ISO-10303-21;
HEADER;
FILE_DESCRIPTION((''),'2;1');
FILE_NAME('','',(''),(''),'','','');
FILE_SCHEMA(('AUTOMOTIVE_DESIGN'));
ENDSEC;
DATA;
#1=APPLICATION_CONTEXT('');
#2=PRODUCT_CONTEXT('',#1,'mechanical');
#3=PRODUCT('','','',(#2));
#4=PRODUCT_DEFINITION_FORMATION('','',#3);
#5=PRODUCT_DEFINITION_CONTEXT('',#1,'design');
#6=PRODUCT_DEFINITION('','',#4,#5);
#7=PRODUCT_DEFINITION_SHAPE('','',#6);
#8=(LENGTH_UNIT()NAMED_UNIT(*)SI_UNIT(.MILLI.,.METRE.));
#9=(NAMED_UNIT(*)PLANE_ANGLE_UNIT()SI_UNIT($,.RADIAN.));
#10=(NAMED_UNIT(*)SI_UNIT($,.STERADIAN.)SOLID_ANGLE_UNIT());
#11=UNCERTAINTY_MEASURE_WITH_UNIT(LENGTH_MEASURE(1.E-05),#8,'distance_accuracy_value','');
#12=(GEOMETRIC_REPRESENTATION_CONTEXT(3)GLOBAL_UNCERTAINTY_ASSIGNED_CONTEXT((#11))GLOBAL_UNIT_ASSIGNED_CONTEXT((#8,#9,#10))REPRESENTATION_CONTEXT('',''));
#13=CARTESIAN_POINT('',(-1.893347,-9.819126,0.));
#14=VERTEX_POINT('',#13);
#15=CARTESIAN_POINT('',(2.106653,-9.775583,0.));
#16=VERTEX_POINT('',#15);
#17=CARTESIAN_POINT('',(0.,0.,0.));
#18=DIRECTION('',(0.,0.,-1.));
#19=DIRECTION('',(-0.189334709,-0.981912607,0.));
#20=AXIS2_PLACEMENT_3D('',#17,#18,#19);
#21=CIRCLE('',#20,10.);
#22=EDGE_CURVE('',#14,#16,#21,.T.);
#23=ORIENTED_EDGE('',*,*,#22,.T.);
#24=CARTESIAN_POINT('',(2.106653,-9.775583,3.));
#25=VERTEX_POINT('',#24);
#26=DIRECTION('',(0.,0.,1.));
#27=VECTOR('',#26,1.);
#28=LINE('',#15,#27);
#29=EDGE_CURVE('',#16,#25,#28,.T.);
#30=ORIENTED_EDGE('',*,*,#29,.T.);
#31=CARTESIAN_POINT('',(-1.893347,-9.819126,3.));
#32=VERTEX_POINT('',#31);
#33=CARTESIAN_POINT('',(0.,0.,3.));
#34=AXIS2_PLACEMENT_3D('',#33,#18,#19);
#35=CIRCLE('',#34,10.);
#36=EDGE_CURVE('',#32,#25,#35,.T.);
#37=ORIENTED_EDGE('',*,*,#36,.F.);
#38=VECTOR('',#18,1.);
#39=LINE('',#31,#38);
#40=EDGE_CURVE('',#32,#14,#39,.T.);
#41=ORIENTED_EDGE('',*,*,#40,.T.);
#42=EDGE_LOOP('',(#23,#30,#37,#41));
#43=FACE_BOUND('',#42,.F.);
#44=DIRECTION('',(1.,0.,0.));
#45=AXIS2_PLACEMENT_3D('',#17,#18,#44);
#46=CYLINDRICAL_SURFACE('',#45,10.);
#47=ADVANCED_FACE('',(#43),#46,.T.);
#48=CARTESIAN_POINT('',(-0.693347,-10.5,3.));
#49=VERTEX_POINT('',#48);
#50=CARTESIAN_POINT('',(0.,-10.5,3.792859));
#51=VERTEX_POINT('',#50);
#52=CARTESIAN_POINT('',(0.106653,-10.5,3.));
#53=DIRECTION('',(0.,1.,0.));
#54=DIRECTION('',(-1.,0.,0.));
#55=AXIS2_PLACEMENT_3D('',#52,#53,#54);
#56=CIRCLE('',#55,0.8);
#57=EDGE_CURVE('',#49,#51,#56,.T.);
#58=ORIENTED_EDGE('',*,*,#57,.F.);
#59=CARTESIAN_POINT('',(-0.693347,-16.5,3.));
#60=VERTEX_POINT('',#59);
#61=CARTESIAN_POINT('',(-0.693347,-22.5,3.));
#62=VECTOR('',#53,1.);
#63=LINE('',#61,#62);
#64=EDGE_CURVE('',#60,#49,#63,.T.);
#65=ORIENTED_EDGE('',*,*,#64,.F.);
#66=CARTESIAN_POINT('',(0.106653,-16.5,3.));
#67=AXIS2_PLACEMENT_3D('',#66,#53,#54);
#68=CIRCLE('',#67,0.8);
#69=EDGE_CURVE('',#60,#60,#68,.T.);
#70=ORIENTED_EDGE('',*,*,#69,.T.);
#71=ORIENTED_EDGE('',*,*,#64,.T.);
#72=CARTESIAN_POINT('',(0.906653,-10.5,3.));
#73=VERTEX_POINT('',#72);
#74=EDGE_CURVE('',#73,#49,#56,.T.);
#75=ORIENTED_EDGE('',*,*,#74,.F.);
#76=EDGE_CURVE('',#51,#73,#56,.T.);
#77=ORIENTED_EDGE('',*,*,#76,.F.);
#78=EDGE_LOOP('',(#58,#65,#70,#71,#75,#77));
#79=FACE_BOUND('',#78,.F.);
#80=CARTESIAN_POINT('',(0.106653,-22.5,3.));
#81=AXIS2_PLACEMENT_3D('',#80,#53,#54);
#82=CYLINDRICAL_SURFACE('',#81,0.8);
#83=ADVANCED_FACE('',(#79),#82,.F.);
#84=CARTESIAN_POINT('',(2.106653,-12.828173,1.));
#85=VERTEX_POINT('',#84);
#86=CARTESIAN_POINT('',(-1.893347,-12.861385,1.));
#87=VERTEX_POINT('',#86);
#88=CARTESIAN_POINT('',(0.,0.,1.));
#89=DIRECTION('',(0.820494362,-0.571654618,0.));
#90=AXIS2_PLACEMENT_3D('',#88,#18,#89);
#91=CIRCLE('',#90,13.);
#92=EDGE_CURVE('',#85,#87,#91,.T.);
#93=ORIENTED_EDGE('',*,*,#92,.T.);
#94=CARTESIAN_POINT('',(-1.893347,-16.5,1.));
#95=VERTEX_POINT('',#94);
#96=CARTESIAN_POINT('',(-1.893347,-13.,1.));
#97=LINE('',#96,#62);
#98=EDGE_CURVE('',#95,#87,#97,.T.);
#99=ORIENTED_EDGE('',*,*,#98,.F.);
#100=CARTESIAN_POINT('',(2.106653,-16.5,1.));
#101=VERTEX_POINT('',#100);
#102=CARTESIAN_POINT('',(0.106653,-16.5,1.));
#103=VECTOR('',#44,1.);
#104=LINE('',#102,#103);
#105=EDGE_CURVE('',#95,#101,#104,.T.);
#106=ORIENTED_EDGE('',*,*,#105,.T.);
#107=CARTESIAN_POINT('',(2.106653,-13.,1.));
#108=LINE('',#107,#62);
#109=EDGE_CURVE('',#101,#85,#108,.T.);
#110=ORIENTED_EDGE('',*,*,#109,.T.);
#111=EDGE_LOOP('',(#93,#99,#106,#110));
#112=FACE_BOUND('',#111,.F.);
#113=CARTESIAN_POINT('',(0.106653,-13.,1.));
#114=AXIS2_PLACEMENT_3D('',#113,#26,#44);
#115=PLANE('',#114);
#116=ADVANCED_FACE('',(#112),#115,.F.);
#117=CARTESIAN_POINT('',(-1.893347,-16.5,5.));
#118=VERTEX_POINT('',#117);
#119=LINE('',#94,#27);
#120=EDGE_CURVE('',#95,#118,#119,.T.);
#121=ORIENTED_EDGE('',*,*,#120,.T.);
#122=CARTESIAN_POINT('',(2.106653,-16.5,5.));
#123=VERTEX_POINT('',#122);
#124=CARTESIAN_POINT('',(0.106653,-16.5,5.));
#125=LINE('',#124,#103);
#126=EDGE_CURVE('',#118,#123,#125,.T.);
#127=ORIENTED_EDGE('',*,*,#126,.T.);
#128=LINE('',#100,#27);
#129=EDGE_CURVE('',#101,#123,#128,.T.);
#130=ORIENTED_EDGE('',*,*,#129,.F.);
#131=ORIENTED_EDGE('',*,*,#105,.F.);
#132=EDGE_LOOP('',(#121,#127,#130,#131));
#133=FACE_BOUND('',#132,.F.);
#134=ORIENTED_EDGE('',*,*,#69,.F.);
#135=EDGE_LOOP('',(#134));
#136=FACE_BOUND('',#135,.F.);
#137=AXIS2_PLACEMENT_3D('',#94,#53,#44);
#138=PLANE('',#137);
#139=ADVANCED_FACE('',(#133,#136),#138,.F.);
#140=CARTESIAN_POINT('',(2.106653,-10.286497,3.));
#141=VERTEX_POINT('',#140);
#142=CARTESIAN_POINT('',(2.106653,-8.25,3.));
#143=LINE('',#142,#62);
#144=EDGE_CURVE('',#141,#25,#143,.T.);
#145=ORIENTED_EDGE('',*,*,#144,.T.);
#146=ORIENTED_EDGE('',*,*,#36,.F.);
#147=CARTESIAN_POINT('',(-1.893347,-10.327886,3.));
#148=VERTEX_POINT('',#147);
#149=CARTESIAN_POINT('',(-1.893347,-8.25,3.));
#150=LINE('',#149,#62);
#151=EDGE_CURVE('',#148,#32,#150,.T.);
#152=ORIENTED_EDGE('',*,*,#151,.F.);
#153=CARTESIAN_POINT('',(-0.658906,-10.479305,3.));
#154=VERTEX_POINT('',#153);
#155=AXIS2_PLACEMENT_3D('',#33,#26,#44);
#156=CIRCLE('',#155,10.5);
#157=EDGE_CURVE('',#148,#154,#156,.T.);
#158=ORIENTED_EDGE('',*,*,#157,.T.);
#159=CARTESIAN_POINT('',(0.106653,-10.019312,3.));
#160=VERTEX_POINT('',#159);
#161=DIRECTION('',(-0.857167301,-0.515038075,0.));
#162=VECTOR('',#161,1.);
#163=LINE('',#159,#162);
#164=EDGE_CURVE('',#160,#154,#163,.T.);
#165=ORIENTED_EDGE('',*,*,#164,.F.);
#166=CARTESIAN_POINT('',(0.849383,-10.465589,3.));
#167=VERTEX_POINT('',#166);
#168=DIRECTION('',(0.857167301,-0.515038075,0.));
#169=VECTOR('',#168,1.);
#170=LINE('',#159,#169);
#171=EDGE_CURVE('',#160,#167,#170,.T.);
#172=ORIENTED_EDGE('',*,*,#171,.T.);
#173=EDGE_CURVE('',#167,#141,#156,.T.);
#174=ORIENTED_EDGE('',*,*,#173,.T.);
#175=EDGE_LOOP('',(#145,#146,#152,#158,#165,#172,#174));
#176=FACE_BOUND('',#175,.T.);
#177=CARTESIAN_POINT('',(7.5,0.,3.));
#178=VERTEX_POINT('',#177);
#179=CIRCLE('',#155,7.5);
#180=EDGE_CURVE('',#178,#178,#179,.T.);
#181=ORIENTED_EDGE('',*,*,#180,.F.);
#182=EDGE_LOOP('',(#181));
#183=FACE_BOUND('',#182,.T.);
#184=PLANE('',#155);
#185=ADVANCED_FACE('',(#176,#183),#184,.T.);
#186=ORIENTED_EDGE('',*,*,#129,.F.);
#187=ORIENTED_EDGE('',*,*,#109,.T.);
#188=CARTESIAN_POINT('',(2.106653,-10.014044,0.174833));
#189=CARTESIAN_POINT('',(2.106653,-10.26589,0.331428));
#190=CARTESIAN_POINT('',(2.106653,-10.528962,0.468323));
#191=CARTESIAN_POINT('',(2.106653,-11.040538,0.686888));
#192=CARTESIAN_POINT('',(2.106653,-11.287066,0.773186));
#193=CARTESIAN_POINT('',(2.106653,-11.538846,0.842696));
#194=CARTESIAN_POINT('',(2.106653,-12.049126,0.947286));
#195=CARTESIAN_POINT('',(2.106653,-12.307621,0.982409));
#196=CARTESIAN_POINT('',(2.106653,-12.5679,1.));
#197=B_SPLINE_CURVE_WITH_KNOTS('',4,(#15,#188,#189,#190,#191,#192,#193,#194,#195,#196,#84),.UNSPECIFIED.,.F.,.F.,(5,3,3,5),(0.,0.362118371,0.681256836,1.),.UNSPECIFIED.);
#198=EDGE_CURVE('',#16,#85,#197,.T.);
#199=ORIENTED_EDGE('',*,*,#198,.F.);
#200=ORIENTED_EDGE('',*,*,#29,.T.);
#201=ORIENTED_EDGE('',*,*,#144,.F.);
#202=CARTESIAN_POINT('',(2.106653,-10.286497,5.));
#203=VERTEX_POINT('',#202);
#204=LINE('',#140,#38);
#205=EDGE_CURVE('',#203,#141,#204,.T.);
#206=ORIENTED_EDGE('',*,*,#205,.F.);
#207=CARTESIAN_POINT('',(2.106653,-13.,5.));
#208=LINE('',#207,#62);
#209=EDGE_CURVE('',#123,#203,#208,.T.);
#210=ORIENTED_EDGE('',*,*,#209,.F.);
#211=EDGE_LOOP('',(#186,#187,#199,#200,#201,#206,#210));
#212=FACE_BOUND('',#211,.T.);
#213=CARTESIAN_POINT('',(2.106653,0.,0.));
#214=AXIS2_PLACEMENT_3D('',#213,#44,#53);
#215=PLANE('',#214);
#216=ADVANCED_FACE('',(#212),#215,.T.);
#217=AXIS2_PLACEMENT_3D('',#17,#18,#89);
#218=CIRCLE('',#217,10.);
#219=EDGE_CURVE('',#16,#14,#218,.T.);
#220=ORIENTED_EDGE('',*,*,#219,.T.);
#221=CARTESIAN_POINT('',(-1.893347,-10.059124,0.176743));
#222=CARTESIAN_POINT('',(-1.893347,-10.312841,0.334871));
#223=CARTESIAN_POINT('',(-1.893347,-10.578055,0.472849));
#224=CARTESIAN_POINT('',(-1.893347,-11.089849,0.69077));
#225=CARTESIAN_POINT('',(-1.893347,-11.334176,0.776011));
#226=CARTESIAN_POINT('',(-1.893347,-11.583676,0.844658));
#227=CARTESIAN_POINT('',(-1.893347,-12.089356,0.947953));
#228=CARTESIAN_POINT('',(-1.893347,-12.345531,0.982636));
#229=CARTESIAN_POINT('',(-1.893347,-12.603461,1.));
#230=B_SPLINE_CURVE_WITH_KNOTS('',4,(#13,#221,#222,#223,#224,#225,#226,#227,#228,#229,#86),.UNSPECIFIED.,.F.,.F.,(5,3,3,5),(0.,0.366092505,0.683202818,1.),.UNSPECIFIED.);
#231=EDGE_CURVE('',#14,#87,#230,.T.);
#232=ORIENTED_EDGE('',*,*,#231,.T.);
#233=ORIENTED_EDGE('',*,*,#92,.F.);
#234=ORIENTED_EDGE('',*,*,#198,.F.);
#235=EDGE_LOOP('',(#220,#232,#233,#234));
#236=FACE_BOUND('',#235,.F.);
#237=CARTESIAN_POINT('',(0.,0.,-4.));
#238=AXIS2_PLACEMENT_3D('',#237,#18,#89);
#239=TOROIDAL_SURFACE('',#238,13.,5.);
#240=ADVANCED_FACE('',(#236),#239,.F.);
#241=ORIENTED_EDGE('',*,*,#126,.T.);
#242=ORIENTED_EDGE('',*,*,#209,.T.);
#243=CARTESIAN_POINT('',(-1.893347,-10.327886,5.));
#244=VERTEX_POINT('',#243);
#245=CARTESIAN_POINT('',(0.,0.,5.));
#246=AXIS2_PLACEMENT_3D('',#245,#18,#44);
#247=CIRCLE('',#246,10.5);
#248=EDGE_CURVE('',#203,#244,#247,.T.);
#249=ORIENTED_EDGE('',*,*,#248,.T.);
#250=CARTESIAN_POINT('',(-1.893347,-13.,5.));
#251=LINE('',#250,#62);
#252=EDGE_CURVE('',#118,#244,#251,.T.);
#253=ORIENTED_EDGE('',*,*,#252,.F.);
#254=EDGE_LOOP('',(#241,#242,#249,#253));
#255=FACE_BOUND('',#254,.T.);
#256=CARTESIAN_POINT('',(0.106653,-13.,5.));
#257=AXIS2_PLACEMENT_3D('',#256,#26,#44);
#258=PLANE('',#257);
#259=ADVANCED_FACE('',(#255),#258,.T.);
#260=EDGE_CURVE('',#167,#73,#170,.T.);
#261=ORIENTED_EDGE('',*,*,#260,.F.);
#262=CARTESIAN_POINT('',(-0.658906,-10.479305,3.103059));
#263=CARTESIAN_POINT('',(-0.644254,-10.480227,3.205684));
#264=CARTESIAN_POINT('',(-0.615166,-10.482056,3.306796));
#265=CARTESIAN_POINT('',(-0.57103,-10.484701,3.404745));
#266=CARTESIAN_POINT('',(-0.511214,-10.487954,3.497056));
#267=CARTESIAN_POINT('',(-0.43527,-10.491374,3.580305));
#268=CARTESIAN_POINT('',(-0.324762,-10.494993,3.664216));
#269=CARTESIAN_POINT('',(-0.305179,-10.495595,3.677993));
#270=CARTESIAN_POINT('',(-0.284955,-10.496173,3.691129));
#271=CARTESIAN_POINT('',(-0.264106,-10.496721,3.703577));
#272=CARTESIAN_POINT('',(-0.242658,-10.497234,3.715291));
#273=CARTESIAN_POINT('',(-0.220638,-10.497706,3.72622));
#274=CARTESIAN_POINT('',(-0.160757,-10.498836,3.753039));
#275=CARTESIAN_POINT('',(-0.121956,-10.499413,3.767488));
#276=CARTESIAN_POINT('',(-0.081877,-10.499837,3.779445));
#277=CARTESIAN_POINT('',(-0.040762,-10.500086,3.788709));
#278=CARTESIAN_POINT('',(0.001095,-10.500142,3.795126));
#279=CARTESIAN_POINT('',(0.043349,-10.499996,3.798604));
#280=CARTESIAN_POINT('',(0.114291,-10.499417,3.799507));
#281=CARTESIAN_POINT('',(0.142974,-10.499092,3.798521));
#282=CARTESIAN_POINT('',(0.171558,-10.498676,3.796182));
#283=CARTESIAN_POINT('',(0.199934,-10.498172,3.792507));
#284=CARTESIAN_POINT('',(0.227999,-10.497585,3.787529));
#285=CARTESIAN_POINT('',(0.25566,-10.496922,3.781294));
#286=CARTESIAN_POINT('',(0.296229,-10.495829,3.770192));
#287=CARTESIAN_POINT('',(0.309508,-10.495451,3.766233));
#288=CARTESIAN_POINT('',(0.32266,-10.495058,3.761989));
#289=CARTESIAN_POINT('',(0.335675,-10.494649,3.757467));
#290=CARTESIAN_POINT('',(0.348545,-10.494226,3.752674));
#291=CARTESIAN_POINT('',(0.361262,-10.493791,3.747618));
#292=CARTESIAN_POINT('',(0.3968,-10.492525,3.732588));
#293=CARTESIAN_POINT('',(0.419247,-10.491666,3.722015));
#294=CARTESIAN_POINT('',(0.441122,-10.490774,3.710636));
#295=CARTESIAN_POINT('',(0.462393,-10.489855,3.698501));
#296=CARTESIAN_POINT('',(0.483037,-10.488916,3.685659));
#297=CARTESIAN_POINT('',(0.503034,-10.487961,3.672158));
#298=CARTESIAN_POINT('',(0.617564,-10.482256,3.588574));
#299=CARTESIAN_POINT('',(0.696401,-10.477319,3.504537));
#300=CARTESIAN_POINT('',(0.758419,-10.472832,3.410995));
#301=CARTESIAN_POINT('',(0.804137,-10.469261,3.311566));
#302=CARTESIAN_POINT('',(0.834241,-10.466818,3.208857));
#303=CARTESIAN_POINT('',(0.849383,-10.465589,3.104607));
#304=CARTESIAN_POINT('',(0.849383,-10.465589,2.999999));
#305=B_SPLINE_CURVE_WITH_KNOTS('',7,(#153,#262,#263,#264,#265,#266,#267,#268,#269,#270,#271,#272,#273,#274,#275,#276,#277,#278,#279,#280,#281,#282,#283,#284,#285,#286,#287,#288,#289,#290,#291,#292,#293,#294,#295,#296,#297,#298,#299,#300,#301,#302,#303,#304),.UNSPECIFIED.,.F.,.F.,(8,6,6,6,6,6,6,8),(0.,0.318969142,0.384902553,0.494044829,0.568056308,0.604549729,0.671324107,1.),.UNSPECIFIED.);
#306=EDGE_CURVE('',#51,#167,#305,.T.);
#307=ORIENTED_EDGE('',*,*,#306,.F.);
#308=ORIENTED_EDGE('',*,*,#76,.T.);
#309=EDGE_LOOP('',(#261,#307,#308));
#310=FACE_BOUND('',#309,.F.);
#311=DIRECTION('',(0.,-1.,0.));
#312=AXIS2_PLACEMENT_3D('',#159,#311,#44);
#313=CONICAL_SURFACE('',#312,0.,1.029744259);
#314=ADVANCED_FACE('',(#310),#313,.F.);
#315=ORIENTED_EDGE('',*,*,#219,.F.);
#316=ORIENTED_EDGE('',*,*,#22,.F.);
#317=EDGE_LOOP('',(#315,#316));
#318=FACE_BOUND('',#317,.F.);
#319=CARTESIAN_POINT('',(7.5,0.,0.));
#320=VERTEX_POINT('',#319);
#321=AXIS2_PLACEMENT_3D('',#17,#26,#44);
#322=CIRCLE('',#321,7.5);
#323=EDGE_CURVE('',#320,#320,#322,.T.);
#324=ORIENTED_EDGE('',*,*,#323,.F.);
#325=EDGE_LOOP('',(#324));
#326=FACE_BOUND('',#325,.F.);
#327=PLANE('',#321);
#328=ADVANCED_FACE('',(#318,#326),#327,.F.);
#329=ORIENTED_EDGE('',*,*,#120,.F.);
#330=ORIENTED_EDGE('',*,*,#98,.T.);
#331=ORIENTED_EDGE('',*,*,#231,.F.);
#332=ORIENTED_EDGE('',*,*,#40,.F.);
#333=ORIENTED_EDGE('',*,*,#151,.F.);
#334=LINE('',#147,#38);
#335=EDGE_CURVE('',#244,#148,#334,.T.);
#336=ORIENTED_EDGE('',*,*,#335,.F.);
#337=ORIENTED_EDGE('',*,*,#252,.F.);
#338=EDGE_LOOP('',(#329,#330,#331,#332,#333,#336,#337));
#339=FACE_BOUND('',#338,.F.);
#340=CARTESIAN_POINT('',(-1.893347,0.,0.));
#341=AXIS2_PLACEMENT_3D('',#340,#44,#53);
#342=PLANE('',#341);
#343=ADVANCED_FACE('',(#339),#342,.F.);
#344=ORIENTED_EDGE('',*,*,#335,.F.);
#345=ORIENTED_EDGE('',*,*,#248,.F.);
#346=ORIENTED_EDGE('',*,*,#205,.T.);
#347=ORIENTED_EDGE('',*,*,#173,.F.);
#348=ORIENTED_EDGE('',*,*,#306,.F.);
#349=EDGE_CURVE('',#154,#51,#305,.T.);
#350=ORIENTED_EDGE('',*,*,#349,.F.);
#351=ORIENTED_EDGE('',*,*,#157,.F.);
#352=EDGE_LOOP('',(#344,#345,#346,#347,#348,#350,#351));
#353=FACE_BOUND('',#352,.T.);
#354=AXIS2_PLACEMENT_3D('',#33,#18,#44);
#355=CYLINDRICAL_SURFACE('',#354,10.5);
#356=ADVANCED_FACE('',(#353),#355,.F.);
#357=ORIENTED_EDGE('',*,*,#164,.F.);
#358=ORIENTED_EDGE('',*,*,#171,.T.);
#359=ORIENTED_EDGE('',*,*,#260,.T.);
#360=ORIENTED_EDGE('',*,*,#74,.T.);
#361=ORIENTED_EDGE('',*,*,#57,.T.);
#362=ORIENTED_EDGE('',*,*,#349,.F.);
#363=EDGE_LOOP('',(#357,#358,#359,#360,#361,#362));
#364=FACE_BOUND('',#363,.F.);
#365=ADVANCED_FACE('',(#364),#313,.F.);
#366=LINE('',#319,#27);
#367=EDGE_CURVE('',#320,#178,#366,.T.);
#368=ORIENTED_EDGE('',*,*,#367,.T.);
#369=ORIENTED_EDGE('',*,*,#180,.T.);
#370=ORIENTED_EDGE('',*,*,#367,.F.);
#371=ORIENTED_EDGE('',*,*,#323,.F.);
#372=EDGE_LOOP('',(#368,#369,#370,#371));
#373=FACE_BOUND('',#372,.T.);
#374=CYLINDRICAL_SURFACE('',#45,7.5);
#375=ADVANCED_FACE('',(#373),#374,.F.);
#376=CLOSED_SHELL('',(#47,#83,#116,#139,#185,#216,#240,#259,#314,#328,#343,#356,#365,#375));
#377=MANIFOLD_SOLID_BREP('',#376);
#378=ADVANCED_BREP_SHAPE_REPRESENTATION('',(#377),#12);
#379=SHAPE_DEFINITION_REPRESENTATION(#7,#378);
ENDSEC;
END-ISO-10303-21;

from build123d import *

# Parameters (mm, degrees)
F0_R        = 10
F0_R_2      = 7.5
F1_DEPTH    = 3
F3_W        = 4
F3_H        = 7
F4_DEPTH    = 4
F5_R        = 10.5
F6_DEPTH    = 25
F7_T4_ANGLE = 109.021242163
F9_D        = 1.6
F9_DEPTH    = 6
F9_TIP      = 0.4806884952


# Not quite as in the source:
# - a fillet or chamfer that OpenCascade refuses, or shapes differently, is made with other operations: its cross-section is extruded or revolved along the edge and cut away or added


with BuildPart() as f1:
    # F0 (on Top) → F1 (new body)
    with BuildSketch(Plane.XY):
        Circle(F0_R)
        Circle(F0_R_2, mode=Mode.SUBTRACT)
    extrude(amount=F1_DEPTH)

    # F3 (on offset) → F4 (join)
    with BuildSketch(Plane.XY.offset(1)):
        with Locations((0.106652909, -13)):
            Rectangle(F3_W, F3_H)
    extrude(amount=F4_DEPTH)

    # F5 (on face) → F6 (cut)
    with BuildSketch(Plane.XY.offset(3)):
        Circle(F5_R)
    extrude(amount=F6_DEPTH, mode=Mode.SUBTRACT)

    # F7: fillet of radius 5 on 1 edges, made by hand


with BuildPart() as f7_tool2:
    # F7_s3 → F7_t4 (revolve)
    with BuildSketch(Plane(origin=(0, 0, 0), x_dir=(0, 0, 1), z_dir=(0.5716546179, 0.8204943618, 0))):
        with BuildLine():
            ThreePointArc((0, 10), (0.7434164903, 11.4188611699), (1, 13))
            Line((1, 13), (1, 10))
            Line((1, 10), (0, 10))
        make_face()
    revolve(axis=Axis((0, 0, 1), (0, 0, -1)), revolution_arc=F7_T4_ANGLE)

    split(bisect_by=Plane.YZ.offset(2.106652909), keep=Keep.BOTTOM)

    split(bisect_by=Plane.YZ.offset(-1.893347091), keep=Keep.TOP)


with BuildPart() as f1_1:
    add(f1.part)

    # F7_t1: union F7_tool2
    add(f7_tool2.part)

    # F9
    with Locations(Plane.XZ.offset(16.5)):
        with Locations((0.106652909, 3)):
            Hole(F9_D / 2, depth=F9_DEPTH)
            with Locations((0, 0, -(F9_DEPTH + F9_TIP / 2))):  # 118° drill point
                Cone(0, F9_D / 2, F9_TIP, mode=Mode.SUBTRACT)


solid = f1_1.part
